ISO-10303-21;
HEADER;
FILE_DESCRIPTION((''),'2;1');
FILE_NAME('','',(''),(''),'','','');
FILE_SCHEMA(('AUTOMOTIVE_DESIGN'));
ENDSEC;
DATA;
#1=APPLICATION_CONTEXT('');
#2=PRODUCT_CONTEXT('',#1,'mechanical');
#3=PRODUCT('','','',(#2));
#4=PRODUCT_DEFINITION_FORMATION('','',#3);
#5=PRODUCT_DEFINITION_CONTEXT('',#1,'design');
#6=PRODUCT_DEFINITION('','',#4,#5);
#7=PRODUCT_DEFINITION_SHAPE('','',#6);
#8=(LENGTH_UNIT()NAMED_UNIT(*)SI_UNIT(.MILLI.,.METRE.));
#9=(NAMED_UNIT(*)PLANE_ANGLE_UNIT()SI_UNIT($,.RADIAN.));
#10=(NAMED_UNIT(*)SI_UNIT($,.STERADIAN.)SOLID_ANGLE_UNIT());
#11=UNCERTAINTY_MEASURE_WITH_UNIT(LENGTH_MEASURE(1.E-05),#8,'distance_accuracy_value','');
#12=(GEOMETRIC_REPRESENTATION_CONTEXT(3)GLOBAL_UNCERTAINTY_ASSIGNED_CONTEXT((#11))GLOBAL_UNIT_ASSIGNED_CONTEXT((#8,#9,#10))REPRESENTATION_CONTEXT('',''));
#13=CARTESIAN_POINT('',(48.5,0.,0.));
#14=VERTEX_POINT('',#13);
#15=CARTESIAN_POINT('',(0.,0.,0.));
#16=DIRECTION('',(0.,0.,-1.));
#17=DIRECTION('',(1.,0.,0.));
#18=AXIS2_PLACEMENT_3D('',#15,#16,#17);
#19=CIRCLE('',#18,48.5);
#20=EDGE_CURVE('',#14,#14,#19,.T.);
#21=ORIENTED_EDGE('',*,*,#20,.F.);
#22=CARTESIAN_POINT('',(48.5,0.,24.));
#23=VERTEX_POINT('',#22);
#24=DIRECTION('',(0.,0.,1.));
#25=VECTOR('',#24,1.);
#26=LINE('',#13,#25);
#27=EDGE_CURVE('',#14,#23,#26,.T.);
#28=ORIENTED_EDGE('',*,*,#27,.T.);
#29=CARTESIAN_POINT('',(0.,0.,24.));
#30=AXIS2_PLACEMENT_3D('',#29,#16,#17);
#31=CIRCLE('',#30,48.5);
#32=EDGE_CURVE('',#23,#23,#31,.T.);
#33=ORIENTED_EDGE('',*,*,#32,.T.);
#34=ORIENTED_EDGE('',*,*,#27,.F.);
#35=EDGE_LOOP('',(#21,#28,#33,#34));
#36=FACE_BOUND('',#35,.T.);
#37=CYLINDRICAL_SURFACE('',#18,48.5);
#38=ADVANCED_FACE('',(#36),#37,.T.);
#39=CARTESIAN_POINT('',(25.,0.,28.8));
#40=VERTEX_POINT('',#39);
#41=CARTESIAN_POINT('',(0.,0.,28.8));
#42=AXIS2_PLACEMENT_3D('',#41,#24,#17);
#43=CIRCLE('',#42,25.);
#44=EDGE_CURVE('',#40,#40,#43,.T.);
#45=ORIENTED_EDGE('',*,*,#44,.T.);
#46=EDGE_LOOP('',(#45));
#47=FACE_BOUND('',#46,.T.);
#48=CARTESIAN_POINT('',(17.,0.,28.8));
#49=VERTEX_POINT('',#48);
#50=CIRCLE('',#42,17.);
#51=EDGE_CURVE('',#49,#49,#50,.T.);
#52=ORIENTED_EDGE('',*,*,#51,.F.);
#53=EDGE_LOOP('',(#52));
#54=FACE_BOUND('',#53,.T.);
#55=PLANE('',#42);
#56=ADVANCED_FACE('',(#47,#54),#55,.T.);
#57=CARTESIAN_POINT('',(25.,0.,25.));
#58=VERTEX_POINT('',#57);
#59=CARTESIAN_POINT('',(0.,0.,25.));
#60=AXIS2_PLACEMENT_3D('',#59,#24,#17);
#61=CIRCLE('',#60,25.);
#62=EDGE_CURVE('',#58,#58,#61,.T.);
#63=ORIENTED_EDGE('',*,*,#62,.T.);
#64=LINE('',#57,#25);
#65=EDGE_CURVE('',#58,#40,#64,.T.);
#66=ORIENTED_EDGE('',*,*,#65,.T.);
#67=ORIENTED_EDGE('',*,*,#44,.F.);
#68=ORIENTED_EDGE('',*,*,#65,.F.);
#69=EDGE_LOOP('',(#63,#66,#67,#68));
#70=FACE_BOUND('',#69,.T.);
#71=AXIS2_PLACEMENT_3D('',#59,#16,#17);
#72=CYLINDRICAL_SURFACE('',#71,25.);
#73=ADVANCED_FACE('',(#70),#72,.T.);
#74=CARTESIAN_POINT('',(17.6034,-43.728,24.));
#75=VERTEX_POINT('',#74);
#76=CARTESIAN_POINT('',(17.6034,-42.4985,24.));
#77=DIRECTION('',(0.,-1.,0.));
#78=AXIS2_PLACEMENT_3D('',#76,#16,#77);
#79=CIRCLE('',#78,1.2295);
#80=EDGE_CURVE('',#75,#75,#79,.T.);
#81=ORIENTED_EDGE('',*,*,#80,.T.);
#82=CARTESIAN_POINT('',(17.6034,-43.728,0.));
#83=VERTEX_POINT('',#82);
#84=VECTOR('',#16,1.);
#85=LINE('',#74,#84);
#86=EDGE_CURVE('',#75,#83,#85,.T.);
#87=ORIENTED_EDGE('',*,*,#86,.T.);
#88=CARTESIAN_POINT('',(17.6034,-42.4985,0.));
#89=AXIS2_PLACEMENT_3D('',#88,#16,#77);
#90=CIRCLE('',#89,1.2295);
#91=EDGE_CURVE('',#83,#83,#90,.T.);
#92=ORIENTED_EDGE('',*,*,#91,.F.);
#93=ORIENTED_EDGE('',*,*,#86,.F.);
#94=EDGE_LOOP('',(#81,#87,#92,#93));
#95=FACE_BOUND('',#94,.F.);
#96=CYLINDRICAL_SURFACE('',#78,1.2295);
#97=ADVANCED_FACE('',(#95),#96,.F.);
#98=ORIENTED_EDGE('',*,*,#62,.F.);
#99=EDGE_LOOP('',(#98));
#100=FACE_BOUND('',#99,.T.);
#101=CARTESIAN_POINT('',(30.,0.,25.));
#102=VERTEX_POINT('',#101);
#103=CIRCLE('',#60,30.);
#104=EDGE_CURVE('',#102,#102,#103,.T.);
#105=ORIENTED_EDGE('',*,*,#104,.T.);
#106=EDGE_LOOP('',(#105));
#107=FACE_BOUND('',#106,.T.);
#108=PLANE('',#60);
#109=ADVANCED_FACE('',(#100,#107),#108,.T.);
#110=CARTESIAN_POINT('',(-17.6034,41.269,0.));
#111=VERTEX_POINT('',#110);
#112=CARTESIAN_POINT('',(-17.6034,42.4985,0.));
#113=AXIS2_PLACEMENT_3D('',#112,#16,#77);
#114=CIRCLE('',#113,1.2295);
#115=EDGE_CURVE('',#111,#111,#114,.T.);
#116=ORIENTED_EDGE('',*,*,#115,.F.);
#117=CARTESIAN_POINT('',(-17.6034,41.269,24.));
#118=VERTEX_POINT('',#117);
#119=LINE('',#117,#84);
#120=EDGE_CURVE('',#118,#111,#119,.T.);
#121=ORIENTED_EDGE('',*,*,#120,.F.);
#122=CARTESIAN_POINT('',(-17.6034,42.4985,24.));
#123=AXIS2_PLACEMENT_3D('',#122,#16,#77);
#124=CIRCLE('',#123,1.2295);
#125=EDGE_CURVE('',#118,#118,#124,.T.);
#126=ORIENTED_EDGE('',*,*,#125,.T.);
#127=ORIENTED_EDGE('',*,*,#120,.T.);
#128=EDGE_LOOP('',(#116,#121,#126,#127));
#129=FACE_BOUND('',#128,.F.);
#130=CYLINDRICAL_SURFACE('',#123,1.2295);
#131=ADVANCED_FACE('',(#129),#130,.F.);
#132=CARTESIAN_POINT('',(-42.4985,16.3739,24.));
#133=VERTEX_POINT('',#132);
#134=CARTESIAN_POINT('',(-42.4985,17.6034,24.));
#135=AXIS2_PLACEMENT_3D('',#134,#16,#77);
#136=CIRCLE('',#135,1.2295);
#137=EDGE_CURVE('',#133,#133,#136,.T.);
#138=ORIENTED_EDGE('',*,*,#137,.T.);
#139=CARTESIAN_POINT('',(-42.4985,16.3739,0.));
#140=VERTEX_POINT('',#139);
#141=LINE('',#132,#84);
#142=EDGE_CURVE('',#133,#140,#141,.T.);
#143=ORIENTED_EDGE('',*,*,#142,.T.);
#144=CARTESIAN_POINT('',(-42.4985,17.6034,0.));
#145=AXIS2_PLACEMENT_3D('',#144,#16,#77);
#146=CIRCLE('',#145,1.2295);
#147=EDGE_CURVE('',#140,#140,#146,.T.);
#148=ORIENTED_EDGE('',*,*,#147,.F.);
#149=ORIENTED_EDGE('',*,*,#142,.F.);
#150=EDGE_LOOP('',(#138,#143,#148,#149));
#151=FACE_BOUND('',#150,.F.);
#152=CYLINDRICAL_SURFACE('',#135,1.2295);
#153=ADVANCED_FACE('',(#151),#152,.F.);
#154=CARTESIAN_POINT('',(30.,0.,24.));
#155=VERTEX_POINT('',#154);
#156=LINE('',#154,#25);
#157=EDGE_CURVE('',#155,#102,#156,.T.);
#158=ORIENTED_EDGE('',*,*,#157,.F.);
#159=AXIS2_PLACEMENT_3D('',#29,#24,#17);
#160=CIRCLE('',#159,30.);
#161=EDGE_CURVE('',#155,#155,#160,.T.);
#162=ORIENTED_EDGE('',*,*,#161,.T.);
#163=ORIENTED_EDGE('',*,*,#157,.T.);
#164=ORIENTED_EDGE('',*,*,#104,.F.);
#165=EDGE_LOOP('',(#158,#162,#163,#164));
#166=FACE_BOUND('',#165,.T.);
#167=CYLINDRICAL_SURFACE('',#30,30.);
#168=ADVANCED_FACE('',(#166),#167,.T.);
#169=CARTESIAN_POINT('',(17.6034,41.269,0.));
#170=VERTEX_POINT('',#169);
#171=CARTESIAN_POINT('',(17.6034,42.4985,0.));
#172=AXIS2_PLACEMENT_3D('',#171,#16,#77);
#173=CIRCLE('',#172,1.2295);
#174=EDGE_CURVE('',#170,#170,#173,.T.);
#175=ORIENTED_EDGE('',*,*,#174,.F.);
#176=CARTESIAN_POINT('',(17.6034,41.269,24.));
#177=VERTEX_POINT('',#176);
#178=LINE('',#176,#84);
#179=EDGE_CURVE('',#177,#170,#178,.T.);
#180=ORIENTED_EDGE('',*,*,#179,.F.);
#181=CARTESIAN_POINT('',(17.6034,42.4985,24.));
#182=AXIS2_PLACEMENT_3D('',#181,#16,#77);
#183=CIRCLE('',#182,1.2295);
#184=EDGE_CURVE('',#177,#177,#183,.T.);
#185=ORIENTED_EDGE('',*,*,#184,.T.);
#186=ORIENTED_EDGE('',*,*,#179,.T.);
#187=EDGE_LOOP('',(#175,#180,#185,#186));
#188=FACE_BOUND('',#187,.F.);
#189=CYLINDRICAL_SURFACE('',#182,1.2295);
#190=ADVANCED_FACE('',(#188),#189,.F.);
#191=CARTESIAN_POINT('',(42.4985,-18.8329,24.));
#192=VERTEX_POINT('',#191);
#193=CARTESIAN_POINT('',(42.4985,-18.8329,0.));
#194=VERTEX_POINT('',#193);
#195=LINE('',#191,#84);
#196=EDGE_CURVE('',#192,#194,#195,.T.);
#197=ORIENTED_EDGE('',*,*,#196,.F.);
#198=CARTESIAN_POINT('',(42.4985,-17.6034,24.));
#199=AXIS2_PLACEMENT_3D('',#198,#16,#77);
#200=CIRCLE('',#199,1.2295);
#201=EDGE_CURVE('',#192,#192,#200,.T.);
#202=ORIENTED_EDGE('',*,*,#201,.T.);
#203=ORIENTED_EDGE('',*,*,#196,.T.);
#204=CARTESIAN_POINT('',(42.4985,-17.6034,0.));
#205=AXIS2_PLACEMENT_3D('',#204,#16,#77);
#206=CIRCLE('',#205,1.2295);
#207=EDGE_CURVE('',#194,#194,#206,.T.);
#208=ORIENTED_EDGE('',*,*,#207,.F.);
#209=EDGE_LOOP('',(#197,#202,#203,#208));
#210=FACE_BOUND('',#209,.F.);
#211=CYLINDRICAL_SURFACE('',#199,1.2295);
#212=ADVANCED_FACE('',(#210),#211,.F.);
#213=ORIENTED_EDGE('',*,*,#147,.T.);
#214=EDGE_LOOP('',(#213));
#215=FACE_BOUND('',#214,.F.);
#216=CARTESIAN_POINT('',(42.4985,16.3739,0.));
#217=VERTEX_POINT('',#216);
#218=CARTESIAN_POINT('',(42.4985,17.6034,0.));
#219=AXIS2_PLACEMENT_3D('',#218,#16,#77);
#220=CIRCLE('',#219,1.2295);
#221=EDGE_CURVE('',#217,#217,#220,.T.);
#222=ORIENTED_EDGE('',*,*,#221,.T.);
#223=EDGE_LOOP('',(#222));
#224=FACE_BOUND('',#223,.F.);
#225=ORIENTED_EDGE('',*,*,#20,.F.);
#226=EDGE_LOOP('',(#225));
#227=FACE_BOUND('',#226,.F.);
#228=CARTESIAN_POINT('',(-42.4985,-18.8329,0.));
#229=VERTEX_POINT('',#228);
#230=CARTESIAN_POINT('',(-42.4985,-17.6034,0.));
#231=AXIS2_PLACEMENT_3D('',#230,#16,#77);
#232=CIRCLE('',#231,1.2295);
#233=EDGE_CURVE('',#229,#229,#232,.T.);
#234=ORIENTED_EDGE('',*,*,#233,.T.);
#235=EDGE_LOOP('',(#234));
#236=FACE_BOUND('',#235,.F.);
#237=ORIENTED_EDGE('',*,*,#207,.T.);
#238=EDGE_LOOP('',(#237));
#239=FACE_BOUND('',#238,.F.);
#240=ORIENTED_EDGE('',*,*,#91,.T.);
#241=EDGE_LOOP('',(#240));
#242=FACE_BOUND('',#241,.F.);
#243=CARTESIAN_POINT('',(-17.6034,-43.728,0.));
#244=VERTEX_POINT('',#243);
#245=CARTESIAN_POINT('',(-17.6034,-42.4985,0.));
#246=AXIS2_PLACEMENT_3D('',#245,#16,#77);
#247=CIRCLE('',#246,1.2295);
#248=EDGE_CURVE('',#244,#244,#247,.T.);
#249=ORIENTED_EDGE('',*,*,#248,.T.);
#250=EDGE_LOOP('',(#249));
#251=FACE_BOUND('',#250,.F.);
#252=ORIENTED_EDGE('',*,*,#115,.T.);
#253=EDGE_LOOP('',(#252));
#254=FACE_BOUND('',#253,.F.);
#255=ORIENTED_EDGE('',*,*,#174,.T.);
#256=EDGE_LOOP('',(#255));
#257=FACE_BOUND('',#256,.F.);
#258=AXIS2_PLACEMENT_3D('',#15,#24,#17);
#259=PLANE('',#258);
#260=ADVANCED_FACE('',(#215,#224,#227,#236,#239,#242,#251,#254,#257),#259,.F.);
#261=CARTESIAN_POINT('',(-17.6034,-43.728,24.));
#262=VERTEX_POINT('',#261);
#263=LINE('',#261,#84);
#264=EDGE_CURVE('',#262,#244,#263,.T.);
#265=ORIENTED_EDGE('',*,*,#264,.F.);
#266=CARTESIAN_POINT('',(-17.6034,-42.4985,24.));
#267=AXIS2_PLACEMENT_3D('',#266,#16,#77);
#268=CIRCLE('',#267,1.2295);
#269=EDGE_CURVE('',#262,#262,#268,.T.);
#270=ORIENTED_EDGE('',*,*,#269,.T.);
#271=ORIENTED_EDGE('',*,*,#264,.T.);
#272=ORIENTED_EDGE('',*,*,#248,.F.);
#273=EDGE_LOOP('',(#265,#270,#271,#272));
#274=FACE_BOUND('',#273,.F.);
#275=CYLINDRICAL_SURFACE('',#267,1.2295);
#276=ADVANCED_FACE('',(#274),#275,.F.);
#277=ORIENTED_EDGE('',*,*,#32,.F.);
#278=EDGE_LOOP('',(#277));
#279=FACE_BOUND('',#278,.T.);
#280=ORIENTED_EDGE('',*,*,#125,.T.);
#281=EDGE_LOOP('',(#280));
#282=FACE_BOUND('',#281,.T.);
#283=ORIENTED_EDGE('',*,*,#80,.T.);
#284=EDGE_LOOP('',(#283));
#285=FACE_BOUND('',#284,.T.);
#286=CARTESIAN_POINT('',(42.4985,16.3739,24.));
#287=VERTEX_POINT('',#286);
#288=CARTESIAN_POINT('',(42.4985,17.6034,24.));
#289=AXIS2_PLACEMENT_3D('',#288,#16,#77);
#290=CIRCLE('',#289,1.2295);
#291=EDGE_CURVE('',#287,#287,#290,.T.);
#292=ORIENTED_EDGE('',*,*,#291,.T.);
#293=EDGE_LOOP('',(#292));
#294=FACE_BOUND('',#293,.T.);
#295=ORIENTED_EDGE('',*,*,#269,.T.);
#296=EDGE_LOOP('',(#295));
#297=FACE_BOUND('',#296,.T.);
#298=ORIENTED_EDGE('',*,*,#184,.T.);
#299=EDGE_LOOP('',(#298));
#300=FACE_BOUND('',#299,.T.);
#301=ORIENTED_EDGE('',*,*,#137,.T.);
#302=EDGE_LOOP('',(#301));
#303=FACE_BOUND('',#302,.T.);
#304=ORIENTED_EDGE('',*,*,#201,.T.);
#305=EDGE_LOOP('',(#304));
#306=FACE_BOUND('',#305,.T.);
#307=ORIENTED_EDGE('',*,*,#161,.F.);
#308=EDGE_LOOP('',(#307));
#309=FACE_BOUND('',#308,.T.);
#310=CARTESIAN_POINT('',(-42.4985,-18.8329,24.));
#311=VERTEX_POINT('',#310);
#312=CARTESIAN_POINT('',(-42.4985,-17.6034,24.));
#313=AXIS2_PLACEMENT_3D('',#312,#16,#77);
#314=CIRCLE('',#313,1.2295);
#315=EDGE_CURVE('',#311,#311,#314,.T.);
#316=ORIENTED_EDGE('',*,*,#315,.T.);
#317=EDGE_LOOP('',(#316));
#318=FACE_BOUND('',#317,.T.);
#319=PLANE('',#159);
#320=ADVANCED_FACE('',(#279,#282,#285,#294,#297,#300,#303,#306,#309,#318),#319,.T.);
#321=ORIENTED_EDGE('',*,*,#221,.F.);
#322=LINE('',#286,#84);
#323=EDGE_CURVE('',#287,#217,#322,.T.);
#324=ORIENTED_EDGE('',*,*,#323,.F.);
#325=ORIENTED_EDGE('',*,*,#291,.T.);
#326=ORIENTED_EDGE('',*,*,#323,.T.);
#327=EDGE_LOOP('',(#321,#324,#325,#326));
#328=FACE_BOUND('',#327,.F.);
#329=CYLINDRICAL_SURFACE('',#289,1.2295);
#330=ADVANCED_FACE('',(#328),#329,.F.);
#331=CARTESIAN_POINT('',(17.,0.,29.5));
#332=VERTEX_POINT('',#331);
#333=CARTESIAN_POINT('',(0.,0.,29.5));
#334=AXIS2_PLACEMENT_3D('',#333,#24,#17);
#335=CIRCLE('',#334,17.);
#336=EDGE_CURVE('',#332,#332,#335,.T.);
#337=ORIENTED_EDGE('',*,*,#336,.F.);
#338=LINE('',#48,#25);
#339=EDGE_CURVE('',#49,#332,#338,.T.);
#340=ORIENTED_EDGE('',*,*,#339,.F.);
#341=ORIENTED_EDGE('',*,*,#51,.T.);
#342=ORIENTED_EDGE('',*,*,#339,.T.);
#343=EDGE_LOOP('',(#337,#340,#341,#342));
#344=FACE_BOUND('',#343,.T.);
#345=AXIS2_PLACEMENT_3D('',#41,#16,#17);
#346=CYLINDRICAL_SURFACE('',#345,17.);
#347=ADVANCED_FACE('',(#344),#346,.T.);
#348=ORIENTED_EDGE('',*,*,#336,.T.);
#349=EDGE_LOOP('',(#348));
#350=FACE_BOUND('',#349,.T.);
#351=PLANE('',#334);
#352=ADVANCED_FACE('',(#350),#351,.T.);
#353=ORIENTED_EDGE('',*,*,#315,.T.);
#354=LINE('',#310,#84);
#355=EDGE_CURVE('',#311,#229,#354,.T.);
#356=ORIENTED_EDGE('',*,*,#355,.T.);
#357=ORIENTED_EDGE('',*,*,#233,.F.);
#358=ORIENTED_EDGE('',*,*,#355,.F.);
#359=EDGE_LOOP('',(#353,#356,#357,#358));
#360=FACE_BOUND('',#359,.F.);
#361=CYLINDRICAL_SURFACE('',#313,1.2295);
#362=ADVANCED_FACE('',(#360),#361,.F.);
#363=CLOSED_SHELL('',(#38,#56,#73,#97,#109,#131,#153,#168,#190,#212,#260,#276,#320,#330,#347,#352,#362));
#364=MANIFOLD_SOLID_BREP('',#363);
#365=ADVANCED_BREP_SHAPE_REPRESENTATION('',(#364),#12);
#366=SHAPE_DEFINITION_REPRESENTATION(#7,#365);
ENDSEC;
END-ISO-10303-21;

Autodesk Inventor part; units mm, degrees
ref_plane "YZ Plane" through (0, 0, 0) normal (1, 0, 0) x (0, 1, 0)
ref_plane "XZ Plane" through (0, 0, 0) normal (0, 1, 0) x (-1, 0, 0)
ref_plane "XY Plane" through (0, 0, 0) normal (0, 0, 1) x (1, 0, 0)
sketch "スケッチ1" plane through (0, 0, 0) normal (0, 0, 1) x (1, 0, 0)
  circle A0 centre (0, 0) radius 46
  line L0 (0, 54.251) -> (0, -59.4354)
  line L1 (-57.6108, 0) -> (60.5194, 0)
  circle A1 centre (0, 0) radius 48.5
  line L2 (0, 0) -> (-23.2819, 56.2075)
  line L3 (-23.2819, 56.2075) -> (0, 0)
  line L4 (0, 0) -> (23.2706, 56.1801)
  point P0 (-17.6034, 42.4985)
  point P1 (17.6034, 42.4985)
  point P2 (-42.4985, -17.6034)
  point P3 (-42.4985, 17.6034)
  point P4 (17.6034, -42.4985)
  point P5 (-17.6034, -42.4985)
  point P6 (42.4985, 17.6034)
  point P7 (42.4985, -17.6034)
  dimension "d0" = 92
  dimension "d1" = 97
  dimension "d2" = 45
  dimension "d3" = 22.5
  dimension "d6" = 360
extrude "押し出し1" add sketch "スケッチ1" along normal blind 24
sketch "スケッチ2" plane through (0, 0, 24) normal (0, 0, 1) x (1, 0, 0)
  line L0 (0, 68.9903) -> (0, -65.3185)
  circle A0 centre (0, 0) radius 46
  line L1 (0, 0) -> (-21.3879, 51.6351)
  line L2 (-21.3879, 51.6351) -> (0, 0)
  line L3 (0, 0) -> (19.8653, 47.959)
  point P0 (-17.6034, 42.4985)
  point P1 (17.6034, 42.4985)
  point P2 (-42.4985, -17.6034)
  point P3 (-42.4985, 17.6034)
  point P4 (17.6034, -42.4985)
  point P5 (-17.6034, -42.4985)
  point P6 (42.4985, 17.6034)
  point P7 (42.4985, -17.6034)
  dimension "d10" = 92
  dimension "d11" = 45
  dimension "d12" = 22.5
  dimension "d15" = 360
hole "穴1" at (-17.6034, 42.4985, 24) at (17.6034, 42.4985, 24) at (-42.4985, -17.6034, 24) at (-42.4985, 17.6034, 24) at (17.6034, -42.4985, 24) at (-17.6034, -42.4985, 24) at (42.4985, 17.6034, 24) at (42.4985, -17.6034, 24) direction (0, 0, -1) diameter 2.459 end through all thread size "M3x0.5" class "6H" standard "ISO Metric profile"
sketch "スケッチ3" plane through (0, 0, 24) normal (0, 0, 1) x (1, 0, 0)
  circle A0 centre (0, 0) radius 30
  dimension "d24" = 60
extrude "押し出し2" add sketch "スケッチ3" along normal blind 1
sketch "スケッチ4" plane through (0, 0, 25) normal (0, 0, 1) x (1, 0, 0)
  circle A0 centre (0, 0) radius 25
  dimension "d27" = 50
extrude "押し出し3" add sketch "スケッチ4" along normal blind 3.8
sketch "スケッチ5" plane through (0, 0, 28.8) normal (0, 0, 1) x (1, 0, 0)
  circle A0 centre (0, 0) radius 17
  dimension "d30" = 34
extrude "押し出し4" add sketch "スケッチ5" along normal blind 0.7
sketch "スケッチ6" plane through (0, 0, 29.5) normal (0, 0, 1) x (1, 0, 0)
  line L0 (0, 40.5289) -> (0, -45.0936)
  line L1 (-34.581, 0) -> (35.411, 0)
  point P0 (0, 0)
properties part number "GIM8108-8"
